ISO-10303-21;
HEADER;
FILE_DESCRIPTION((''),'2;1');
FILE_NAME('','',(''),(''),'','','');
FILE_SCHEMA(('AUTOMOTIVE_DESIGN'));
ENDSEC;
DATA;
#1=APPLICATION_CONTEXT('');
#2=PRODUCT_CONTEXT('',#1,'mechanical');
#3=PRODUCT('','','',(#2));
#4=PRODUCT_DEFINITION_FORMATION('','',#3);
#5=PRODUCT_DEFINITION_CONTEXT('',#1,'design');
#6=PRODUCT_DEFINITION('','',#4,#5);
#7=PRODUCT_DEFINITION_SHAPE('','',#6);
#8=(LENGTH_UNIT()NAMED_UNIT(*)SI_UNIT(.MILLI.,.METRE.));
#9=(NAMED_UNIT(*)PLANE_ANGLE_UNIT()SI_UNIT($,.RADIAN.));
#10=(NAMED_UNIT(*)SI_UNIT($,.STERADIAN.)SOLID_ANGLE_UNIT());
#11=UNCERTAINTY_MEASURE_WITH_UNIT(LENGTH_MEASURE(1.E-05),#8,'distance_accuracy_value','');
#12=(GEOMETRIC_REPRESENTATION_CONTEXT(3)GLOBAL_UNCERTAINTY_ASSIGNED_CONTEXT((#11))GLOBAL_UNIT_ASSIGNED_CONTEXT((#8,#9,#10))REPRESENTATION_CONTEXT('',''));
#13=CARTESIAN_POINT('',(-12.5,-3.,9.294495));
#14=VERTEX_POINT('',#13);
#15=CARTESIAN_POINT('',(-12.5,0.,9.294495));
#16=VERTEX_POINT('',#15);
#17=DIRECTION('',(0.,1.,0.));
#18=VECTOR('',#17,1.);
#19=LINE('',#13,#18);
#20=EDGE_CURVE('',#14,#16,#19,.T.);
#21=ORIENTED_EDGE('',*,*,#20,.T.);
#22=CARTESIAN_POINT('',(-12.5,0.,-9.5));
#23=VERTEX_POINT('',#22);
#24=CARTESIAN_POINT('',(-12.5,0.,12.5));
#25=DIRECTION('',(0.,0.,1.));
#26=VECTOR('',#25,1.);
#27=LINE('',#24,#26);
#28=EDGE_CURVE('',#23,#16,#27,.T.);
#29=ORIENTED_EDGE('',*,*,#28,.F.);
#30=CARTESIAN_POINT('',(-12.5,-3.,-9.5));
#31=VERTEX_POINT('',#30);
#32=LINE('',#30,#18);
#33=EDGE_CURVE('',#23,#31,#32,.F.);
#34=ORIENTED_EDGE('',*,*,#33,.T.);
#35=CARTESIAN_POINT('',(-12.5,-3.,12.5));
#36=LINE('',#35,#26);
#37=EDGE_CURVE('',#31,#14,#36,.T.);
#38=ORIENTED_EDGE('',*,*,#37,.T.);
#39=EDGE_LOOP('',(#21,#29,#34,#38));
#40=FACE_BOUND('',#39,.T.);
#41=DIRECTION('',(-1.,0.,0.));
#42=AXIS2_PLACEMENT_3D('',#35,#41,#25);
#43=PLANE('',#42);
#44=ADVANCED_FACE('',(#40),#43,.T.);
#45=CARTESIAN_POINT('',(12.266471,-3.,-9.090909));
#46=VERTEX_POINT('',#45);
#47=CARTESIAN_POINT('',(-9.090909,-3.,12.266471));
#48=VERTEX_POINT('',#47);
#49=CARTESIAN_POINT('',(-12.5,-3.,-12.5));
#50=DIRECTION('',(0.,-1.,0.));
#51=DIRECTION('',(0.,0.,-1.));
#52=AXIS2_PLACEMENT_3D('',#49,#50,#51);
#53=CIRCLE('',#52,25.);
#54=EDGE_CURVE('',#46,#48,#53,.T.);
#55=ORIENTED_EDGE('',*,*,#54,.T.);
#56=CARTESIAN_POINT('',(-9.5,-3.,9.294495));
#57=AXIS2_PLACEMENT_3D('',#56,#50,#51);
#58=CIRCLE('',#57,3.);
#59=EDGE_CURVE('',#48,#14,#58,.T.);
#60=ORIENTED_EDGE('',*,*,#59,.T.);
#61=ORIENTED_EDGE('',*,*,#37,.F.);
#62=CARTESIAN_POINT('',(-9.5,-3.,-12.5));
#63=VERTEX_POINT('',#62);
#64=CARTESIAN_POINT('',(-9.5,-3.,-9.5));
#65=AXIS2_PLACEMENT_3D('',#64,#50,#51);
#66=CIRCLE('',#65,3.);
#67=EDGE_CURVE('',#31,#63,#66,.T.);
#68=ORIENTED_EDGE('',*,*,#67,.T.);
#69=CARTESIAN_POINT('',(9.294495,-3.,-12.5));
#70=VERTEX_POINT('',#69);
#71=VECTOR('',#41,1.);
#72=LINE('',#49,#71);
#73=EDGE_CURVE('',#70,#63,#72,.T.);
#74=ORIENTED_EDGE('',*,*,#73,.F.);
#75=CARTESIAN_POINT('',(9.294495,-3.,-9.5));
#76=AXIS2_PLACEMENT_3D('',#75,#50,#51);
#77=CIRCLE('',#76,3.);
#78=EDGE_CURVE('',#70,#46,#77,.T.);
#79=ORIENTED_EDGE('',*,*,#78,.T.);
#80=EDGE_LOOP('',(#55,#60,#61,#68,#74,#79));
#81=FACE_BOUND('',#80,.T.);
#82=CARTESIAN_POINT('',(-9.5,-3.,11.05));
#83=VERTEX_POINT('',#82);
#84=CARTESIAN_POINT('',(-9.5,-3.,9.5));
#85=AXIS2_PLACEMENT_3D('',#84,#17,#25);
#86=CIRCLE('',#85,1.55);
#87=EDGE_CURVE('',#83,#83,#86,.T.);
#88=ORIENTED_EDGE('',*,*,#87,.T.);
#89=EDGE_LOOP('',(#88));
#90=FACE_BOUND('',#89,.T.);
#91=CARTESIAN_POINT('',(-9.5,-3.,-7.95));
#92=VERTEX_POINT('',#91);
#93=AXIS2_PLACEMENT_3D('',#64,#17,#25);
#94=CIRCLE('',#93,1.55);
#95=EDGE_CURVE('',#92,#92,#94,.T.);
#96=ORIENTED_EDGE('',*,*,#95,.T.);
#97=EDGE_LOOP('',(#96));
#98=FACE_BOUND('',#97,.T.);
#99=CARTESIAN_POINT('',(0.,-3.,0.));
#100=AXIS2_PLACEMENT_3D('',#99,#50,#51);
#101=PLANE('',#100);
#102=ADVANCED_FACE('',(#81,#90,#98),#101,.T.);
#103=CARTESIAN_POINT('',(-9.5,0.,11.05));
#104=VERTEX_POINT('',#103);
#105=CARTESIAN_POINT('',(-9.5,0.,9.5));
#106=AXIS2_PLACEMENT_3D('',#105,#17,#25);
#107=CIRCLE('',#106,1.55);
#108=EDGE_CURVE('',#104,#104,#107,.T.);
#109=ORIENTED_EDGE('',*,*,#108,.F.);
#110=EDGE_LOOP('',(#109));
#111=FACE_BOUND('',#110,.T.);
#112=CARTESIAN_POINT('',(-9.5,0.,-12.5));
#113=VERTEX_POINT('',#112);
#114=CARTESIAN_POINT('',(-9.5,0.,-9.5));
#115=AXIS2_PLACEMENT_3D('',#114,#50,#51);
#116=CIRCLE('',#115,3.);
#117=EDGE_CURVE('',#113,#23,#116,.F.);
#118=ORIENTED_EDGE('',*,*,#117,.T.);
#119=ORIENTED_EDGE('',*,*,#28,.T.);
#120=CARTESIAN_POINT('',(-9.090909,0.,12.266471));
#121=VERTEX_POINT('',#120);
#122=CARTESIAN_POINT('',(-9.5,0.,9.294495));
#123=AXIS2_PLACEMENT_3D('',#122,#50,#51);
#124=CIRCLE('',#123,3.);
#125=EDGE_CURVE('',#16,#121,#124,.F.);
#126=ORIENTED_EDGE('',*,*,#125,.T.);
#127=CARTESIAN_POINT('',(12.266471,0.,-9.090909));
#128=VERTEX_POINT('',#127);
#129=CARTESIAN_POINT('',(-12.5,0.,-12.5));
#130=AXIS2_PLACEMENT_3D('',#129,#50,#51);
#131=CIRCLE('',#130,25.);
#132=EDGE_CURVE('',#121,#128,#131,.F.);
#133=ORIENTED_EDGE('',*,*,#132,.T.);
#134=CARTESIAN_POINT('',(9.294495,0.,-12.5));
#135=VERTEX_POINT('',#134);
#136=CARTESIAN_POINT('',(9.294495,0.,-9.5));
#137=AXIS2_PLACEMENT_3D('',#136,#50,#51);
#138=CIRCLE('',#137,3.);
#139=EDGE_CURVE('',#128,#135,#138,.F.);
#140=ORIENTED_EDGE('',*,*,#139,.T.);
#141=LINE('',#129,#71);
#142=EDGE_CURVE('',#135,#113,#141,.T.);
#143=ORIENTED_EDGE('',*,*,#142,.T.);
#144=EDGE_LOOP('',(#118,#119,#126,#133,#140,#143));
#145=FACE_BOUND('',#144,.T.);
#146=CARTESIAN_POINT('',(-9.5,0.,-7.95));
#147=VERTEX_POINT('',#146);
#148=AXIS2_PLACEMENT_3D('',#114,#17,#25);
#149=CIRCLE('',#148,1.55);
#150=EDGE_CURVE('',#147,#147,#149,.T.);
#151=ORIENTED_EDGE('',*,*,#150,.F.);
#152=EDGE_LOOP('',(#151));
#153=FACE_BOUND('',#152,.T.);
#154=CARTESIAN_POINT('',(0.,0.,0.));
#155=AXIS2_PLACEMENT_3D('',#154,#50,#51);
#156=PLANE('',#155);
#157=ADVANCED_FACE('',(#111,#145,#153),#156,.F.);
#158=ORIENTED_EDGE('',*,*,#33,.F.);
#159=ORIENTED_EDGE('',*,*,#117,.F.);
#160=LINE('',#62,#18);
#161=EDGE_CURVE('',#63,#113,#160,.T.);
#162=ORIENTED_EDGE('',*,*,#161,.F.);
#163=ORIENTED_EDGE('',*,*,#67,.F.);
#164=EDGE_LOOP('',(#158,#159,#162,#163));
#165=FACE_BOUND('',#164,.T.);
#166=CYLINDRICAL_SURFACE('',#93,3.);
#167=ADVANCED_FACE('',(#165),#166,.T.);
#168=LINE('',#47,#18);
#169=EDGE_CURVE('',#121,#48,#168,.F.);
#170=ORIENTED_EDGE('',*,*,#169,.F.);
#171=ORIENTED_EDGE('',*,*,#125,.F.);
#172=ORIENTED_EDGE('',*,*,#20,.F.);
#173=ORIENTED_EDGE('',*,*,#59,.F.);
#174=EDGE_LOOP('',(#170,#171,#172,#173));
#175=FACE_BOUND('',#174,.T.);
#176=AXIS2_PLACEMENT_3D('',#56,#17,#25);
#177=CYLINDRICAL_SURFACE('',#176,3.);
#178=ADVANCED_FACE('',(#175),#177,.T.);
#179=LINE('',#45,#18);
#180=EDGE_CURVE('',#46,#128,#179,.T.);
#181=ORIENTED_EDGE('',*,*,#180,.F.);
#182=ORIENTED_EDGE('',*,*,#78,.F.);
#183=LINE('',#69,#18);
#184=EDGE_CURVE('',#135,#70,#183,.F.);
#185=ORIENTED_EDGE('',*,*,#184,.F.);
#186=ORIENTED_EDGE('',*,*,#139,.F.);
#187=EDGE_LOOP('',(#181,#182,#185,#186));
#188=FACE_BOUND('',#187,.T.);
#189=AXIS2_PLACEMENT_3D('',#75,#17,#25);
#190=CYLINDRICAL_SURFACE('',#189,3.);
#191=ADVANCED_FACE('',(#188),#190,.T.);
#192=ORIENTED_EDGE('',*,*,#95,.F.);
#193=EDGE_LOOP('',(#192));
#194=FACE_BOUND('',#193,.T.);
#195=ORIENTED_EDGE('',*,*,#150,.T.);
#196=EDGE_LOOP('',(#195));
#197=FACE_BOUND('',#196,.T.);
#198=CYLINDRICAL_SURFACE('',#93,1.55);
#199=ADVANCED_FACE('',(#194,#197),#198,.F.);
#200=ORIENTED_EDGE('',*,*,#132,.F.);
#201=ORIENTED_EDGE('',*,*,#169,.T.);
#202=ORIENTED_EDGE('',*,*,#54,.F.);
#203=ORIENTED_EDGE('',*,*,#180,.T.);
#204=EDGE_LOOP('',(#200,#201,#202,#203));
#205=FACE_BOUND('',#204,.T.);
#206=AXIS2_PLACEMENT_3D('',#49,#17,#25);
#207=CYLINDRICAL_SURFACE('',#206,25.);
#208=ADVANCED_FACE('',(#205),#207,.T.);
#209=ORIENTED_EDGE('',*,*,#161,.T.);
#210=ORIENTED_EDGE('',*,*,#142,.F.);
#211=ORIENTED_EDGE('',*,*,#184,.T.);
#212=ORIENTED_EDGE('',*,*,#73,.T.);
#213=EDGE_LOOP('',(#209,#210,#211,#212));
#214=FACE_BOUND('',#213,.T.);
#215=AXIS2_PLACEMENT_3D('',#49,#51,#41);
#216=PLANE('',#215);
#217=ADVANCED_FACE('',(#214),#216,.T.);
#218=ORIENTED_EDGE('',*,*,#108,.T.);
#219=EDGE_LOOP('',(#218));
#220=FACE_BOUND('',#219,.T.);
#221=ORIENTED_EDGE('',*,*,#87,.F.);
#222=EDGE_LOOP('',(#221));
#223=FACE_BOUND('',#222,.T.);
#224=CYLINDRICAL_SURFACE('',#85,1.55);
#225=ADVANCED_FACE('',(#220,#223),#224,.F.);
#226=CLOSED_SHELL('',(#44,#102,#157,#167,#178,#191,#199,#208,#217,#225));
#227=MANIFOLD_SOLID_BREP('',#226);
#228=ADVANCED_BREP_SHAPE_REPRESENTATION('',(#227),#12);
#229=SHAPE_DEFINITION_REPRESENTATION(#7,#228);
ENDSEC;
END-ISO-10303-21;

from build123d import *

# Parameters (mm, degrees)
SKETCH1_W           = 25
SKETCH1_H           = 25
SKETCH1_R           = 1.55
BOSS_EXTRUDE1_DEPTH = 3
FILLET1_R           = 25
FILLET2_R           = 3


with BuildPart() as part:
    # Sketch1 → Boss-Extrude1 (new body)
    with BuildSketch(Plane(origin=(0, 0, 0), x_dir=(1, 0, 0), z_dir=(0, 1, 0))):
        Rectangle(SKETCH1_W, SKETCH1_H)
        with Locations(Location((-9.5, 9.5, 0), (0, 0, 270))):
            Circle(SKETCH1_R, mode=Mode.SUBTRACT)
        with Locations(Location((-9.5, -9.5, 0), (0, 0, 270))):
            Circle(SKETCH1_R, mode=Mode.SUBTRACT)
    extrude(amount=-BOSS_EXTRUDE1_DEPTH)

    # Fillet1
    fillet1_edges = [part.edges().sort_by_distance(p)[0] for p in [
        (12.5, -1.5, 12.5),
    ]]
    fillet(fillet1_edges, radius=FILLET1_R - 0.0001)  # a hair under: the kernel refuses the full size

    # Fillet2
    fillet2_edges = [part.edges().sort_by_distance(p)[0] for p in [
        (-12.5, -1.5, 12.5),
        (-12.5, -1.5, -12.5),
        (12.5, -1.5, -12.5),
    ]]
    fillet(fillet2_edges, radius=FILLET2_R)


solid = part.part
